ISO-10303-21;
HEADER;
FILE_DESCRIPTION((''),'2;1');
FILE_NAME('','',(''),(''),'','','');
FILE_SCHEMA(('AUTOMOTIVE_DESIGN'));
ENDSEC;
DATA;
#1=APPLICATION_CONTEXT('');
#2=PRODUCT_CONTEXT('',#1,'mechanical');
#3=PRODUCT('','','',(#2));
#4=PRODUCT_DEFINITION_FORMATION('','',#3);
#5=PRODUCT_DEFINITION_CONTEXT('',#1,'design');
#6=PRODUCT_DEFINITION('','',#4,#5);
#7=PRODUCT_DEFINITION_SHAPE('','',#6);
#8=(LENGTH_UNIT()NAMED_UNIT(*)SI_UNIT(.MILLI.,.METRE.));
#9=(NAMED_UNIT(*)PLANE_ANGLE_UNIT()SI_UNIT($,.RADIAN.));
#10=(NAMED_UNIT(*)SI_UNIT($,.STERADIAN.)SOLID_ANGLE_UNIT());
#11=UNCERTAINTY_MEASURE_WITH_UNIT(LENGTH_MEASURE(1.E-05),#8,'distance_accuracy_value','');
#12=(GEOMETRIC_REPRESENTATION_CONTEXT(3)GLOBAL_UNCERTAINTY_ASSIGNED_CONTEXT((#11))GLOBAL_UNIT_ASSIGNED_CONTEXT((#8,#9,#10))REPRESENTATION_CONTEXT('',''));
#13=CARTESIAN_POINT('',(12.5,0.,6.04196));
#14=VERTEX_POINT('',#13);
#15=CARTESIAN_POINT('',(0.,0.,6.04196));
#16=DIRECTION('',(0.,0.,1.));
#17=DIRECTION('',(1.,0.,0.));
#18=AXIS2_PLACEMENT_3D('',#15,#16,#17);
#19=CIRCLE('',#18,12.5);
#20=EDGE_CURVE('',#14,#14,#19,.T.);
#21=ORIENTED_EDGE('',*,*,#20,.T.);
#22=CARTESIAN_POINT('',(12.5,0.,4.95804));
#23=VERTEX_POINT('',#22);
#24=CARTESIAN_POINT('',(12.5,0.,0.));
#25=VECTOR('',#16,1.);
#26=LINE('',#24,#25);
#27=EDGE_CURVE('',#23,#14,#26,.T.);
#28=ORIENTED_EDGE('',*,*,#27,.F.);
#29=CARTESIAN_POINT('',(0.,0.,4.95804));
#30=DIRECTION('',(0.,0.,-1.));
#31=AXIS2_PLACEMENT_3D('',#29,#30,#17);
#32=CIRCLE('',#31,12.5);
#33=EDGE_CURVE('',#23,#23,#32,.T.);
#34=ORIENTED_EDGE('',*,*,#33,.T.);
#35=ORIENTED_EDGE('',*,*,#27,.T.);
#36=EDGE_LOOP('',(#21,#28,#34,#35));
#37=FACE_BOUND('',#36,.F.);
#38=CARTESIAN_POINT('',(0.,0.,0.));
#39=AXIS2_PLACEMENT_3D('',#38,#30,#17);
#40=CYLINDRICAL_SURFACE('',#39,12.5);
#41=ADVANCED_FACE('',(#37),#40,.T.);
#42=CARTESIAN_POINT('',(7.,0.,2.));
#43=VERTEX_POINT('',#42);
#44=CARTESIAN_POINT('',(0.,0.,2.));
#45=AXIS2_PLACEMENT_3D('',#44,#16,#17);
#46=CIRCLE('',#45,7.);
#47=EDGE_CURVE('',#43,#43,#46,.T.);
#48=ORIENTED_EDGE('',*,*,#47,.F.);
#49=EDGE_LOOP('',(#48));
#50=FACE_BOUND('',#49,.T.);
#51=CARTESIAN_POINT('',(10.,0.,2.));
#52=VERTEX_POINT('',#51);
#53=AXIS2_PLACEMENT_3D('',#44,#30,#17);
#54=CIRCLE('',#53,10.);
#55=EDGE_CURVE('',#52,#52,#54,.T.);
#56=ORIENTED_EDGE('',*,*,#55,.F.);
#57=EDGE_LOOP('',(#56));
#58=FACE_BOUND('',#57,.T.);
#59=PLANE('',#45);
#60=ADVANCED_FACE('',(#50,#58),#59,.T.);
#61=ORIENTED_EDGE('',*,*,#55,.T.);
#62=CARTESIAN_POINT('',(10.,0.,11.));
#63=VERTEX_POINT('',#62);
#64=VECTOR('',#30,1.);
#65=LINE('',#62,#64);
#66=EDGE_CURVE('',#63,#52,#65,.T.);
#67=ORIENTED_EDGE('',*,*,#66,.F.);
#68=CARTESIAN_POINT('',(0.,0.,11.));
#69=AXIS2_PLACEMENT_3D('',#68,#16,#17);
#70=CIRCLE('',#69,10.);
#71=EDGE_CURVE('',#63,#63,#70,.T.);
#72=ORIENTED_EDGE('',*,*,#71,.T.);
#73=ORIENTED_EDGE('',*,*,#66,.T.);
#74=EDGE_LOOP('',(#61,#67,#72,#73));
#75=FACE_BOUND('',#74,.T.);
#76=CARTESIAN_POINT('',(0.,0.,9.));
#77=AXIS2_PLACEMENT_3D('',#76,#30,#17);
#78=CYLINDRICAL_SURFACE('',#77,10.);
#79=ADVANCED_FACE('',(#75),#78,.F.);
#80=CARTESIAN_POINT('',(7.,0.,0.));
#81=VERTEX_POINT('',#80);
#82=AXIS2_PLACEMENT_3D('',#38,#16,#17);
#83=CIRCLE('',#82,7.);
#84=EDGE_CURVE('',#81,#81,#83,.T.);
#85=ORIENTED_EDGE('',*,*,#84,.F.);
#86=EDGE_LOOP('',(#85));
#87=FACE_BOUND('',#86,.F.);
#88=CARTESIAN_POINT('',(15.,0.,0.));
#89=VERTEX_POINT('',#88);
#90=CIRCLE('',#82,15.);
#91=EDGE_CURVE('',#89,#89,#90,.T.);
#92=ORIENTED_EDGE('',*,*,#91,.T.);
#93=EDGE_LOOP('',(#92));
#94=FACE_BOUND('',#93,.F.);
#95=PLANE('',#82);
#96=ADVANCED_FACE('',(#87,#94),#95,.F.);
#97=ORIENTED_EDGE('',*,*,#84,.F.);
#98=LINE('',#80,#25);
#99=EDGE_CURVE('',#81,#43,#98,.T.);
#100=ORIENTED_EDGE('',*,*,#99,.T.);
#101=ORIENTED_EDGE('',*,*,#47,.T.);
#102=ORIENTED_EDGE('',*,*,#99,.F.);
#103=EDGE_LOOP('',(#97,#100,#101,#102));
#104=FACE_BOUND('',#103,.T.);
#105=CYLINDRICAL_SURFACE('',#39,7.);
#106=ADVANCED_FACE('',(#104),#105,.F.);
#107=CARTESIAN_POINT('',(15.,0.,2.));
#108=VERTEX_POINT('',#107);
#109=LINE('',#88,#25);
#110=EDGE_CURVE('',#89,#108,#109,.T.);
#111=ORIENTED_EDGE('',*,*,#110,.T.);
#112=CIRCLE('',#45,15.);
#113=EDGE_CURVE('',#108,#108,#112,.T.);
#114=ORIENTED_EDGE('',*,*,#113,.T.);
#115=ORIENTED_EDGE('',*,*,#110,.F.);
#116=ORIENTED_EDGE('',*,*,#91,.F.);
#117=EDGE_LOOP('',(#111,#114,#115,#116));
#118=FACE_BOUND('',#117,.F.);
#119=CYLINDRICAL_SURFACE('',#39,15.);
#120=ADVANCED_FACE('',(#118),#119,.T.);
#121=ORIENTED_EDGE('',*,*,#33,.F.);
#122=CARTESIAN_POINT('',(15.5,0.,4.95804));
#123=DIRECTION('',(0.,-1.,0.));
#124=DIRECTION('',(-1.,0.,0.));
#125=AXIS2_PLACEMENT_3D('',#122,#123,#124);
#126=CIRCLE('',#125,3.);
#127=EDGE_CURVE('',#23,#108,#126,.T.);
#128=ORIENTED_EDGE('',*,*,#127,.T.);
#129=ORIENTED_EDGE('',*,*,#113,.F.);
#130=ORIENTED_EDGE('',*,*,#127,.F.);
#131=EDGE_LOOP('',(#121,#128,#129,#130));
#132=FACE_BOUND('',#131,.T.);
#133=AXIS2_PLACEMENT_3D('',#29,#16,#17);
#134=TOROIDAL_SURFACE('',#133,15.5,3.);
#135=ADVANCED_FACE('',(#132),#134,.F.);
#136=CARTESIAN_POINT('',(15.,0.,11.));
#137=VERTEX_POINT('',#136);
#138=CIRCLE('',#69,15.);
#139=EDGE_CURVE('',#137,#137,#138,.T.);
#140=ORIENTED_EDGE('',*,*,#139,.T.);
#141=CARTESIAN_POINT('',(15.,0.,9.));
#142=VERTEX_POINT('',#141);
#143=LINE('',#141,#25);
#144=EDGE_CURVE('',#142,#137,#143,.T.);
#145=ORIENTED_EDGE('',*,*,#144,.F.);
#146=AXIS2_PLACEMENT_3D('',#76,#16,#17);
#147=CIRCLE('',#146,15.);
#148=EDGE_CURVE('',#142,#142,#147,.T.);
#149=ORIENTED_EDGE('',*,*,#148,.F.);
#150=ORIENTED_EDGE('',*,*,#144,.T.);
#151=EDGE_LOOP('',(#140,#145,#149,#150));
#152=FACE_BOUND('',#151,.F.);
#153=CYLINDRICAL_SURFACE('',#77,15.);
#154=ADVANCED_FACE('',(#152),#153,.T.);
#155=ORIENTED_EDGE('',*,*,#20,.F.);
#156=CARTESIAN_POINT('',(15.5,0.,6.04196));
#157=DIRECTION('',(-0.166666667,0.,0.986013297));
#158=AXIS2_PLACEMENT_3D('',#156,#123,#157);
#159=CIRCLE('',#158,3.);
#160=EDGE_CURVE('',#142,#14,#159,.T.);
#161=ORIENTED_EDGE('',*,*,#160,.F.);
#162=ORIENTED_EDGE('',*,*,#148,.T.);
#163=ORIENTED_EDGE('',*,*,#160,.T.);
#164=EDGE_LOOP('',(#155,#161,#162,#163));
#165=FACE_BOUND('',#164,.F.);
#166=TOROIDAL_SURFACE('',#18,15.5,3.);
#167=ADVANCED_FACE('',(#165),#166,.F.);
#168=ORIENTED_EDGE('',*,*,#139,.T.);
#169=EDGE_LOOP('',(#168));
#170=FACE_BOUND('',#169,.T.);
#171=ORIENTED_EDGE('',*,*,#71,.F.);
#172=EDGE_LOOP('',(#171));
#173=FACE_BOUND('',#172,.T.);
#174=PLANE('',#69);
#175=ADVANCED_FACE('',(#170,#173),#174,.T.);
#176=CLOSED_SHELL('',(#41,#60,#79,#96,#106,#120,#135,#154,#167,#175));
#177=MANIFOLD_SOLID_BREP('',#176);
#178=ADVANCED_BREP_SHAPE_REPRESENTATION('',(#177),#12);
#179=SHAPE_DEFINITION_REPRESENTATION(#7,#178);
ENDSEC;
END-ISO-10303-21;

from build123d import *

# Parameters (mm, degrees)
F0_R     = 15
F0_R_2   = 12.5
F0_R_3   = 10
F0_R_4   = 7
F1_DEPTH = 2
F2_DEPTH = 9
F3_R     = 15
F3_R_2   = 12.5
F3_R_3   = 10
F4_DEPTH = 2


# Not quite as in the source:
# - a fillet or chamfer that OpenCascade refuses, or shapes differently, is made with other operations: its cross-section is extruded or revolved along the edge and cut away or added


with BuildPart() as f1:
    # F0 (on Top) → F1 (new body)
    with BuildSketch(Plane.XY):
        Circle(F0_R)
        Circle(F0_R_2, mode=Mode.SUBTRACT)
        Circle(F0_R_2)
        Circle(F0_R_3, mode=Mode.SUBTRACT)
        Circle(F0_R_3)
        Circle(F0_R_4, mode=Mode.SUBTRACT)
    extrude(amount=F1_DEPTH)

    # F0 (on Top) → F2 (join)
    with BuildSketch(Plane.XY):
        Circle(F0_R_2)
        Circle(F0_R_3, mode=Mode.SUBTRACT)
    extrude(amount=F2_DEPTH)

    # F3 (on face) → F4 (join)
    with BuildSketch(Plane.XY.offset(9)):
        Circle(F3_R)
        Circle(F3_R_2, mode=Mode.SUBTRACT)
        Circle(F3_R_2)
        Circle(F3_R_3, mode=Mode.SUBTRACT)
    extrude(amount=F4_DEPTH)

    # F5: fillet of radius 3 on 2 edges, made by hand

    # F5_s1 → F5_t2 (revolve)
    with BuildSketch(Plane.XZ):
        with BuildLine():
            ThreePointArc((12.5, 4.9580398916), (13.2087121525, 3.0215482184), (15, 2))
            Line((15, 2), (12.5, 2))
            Line((12.5, 2), (12.5, 4.9580398916))
        make_face()
    revolve(axis=Axis((0, 0, 2), (0, 0, -1)))

    # F5_s3 → F5_t4 (revolve)
    with BuildSketch(Plane.XZ):
        with BuildLine():
            ThreePointArc((15, 9), (13.2087121525, 7.9784517816), (12.5, 6.0419601084))
            Line((12.5, 6.0419601084), (12.5, 9))
            Line((12.5, 9), (15, 9))
        make_face()
    revolve(axis=Axis((0, 0, 9), (0, 0, 1)))


solid = f1.part
